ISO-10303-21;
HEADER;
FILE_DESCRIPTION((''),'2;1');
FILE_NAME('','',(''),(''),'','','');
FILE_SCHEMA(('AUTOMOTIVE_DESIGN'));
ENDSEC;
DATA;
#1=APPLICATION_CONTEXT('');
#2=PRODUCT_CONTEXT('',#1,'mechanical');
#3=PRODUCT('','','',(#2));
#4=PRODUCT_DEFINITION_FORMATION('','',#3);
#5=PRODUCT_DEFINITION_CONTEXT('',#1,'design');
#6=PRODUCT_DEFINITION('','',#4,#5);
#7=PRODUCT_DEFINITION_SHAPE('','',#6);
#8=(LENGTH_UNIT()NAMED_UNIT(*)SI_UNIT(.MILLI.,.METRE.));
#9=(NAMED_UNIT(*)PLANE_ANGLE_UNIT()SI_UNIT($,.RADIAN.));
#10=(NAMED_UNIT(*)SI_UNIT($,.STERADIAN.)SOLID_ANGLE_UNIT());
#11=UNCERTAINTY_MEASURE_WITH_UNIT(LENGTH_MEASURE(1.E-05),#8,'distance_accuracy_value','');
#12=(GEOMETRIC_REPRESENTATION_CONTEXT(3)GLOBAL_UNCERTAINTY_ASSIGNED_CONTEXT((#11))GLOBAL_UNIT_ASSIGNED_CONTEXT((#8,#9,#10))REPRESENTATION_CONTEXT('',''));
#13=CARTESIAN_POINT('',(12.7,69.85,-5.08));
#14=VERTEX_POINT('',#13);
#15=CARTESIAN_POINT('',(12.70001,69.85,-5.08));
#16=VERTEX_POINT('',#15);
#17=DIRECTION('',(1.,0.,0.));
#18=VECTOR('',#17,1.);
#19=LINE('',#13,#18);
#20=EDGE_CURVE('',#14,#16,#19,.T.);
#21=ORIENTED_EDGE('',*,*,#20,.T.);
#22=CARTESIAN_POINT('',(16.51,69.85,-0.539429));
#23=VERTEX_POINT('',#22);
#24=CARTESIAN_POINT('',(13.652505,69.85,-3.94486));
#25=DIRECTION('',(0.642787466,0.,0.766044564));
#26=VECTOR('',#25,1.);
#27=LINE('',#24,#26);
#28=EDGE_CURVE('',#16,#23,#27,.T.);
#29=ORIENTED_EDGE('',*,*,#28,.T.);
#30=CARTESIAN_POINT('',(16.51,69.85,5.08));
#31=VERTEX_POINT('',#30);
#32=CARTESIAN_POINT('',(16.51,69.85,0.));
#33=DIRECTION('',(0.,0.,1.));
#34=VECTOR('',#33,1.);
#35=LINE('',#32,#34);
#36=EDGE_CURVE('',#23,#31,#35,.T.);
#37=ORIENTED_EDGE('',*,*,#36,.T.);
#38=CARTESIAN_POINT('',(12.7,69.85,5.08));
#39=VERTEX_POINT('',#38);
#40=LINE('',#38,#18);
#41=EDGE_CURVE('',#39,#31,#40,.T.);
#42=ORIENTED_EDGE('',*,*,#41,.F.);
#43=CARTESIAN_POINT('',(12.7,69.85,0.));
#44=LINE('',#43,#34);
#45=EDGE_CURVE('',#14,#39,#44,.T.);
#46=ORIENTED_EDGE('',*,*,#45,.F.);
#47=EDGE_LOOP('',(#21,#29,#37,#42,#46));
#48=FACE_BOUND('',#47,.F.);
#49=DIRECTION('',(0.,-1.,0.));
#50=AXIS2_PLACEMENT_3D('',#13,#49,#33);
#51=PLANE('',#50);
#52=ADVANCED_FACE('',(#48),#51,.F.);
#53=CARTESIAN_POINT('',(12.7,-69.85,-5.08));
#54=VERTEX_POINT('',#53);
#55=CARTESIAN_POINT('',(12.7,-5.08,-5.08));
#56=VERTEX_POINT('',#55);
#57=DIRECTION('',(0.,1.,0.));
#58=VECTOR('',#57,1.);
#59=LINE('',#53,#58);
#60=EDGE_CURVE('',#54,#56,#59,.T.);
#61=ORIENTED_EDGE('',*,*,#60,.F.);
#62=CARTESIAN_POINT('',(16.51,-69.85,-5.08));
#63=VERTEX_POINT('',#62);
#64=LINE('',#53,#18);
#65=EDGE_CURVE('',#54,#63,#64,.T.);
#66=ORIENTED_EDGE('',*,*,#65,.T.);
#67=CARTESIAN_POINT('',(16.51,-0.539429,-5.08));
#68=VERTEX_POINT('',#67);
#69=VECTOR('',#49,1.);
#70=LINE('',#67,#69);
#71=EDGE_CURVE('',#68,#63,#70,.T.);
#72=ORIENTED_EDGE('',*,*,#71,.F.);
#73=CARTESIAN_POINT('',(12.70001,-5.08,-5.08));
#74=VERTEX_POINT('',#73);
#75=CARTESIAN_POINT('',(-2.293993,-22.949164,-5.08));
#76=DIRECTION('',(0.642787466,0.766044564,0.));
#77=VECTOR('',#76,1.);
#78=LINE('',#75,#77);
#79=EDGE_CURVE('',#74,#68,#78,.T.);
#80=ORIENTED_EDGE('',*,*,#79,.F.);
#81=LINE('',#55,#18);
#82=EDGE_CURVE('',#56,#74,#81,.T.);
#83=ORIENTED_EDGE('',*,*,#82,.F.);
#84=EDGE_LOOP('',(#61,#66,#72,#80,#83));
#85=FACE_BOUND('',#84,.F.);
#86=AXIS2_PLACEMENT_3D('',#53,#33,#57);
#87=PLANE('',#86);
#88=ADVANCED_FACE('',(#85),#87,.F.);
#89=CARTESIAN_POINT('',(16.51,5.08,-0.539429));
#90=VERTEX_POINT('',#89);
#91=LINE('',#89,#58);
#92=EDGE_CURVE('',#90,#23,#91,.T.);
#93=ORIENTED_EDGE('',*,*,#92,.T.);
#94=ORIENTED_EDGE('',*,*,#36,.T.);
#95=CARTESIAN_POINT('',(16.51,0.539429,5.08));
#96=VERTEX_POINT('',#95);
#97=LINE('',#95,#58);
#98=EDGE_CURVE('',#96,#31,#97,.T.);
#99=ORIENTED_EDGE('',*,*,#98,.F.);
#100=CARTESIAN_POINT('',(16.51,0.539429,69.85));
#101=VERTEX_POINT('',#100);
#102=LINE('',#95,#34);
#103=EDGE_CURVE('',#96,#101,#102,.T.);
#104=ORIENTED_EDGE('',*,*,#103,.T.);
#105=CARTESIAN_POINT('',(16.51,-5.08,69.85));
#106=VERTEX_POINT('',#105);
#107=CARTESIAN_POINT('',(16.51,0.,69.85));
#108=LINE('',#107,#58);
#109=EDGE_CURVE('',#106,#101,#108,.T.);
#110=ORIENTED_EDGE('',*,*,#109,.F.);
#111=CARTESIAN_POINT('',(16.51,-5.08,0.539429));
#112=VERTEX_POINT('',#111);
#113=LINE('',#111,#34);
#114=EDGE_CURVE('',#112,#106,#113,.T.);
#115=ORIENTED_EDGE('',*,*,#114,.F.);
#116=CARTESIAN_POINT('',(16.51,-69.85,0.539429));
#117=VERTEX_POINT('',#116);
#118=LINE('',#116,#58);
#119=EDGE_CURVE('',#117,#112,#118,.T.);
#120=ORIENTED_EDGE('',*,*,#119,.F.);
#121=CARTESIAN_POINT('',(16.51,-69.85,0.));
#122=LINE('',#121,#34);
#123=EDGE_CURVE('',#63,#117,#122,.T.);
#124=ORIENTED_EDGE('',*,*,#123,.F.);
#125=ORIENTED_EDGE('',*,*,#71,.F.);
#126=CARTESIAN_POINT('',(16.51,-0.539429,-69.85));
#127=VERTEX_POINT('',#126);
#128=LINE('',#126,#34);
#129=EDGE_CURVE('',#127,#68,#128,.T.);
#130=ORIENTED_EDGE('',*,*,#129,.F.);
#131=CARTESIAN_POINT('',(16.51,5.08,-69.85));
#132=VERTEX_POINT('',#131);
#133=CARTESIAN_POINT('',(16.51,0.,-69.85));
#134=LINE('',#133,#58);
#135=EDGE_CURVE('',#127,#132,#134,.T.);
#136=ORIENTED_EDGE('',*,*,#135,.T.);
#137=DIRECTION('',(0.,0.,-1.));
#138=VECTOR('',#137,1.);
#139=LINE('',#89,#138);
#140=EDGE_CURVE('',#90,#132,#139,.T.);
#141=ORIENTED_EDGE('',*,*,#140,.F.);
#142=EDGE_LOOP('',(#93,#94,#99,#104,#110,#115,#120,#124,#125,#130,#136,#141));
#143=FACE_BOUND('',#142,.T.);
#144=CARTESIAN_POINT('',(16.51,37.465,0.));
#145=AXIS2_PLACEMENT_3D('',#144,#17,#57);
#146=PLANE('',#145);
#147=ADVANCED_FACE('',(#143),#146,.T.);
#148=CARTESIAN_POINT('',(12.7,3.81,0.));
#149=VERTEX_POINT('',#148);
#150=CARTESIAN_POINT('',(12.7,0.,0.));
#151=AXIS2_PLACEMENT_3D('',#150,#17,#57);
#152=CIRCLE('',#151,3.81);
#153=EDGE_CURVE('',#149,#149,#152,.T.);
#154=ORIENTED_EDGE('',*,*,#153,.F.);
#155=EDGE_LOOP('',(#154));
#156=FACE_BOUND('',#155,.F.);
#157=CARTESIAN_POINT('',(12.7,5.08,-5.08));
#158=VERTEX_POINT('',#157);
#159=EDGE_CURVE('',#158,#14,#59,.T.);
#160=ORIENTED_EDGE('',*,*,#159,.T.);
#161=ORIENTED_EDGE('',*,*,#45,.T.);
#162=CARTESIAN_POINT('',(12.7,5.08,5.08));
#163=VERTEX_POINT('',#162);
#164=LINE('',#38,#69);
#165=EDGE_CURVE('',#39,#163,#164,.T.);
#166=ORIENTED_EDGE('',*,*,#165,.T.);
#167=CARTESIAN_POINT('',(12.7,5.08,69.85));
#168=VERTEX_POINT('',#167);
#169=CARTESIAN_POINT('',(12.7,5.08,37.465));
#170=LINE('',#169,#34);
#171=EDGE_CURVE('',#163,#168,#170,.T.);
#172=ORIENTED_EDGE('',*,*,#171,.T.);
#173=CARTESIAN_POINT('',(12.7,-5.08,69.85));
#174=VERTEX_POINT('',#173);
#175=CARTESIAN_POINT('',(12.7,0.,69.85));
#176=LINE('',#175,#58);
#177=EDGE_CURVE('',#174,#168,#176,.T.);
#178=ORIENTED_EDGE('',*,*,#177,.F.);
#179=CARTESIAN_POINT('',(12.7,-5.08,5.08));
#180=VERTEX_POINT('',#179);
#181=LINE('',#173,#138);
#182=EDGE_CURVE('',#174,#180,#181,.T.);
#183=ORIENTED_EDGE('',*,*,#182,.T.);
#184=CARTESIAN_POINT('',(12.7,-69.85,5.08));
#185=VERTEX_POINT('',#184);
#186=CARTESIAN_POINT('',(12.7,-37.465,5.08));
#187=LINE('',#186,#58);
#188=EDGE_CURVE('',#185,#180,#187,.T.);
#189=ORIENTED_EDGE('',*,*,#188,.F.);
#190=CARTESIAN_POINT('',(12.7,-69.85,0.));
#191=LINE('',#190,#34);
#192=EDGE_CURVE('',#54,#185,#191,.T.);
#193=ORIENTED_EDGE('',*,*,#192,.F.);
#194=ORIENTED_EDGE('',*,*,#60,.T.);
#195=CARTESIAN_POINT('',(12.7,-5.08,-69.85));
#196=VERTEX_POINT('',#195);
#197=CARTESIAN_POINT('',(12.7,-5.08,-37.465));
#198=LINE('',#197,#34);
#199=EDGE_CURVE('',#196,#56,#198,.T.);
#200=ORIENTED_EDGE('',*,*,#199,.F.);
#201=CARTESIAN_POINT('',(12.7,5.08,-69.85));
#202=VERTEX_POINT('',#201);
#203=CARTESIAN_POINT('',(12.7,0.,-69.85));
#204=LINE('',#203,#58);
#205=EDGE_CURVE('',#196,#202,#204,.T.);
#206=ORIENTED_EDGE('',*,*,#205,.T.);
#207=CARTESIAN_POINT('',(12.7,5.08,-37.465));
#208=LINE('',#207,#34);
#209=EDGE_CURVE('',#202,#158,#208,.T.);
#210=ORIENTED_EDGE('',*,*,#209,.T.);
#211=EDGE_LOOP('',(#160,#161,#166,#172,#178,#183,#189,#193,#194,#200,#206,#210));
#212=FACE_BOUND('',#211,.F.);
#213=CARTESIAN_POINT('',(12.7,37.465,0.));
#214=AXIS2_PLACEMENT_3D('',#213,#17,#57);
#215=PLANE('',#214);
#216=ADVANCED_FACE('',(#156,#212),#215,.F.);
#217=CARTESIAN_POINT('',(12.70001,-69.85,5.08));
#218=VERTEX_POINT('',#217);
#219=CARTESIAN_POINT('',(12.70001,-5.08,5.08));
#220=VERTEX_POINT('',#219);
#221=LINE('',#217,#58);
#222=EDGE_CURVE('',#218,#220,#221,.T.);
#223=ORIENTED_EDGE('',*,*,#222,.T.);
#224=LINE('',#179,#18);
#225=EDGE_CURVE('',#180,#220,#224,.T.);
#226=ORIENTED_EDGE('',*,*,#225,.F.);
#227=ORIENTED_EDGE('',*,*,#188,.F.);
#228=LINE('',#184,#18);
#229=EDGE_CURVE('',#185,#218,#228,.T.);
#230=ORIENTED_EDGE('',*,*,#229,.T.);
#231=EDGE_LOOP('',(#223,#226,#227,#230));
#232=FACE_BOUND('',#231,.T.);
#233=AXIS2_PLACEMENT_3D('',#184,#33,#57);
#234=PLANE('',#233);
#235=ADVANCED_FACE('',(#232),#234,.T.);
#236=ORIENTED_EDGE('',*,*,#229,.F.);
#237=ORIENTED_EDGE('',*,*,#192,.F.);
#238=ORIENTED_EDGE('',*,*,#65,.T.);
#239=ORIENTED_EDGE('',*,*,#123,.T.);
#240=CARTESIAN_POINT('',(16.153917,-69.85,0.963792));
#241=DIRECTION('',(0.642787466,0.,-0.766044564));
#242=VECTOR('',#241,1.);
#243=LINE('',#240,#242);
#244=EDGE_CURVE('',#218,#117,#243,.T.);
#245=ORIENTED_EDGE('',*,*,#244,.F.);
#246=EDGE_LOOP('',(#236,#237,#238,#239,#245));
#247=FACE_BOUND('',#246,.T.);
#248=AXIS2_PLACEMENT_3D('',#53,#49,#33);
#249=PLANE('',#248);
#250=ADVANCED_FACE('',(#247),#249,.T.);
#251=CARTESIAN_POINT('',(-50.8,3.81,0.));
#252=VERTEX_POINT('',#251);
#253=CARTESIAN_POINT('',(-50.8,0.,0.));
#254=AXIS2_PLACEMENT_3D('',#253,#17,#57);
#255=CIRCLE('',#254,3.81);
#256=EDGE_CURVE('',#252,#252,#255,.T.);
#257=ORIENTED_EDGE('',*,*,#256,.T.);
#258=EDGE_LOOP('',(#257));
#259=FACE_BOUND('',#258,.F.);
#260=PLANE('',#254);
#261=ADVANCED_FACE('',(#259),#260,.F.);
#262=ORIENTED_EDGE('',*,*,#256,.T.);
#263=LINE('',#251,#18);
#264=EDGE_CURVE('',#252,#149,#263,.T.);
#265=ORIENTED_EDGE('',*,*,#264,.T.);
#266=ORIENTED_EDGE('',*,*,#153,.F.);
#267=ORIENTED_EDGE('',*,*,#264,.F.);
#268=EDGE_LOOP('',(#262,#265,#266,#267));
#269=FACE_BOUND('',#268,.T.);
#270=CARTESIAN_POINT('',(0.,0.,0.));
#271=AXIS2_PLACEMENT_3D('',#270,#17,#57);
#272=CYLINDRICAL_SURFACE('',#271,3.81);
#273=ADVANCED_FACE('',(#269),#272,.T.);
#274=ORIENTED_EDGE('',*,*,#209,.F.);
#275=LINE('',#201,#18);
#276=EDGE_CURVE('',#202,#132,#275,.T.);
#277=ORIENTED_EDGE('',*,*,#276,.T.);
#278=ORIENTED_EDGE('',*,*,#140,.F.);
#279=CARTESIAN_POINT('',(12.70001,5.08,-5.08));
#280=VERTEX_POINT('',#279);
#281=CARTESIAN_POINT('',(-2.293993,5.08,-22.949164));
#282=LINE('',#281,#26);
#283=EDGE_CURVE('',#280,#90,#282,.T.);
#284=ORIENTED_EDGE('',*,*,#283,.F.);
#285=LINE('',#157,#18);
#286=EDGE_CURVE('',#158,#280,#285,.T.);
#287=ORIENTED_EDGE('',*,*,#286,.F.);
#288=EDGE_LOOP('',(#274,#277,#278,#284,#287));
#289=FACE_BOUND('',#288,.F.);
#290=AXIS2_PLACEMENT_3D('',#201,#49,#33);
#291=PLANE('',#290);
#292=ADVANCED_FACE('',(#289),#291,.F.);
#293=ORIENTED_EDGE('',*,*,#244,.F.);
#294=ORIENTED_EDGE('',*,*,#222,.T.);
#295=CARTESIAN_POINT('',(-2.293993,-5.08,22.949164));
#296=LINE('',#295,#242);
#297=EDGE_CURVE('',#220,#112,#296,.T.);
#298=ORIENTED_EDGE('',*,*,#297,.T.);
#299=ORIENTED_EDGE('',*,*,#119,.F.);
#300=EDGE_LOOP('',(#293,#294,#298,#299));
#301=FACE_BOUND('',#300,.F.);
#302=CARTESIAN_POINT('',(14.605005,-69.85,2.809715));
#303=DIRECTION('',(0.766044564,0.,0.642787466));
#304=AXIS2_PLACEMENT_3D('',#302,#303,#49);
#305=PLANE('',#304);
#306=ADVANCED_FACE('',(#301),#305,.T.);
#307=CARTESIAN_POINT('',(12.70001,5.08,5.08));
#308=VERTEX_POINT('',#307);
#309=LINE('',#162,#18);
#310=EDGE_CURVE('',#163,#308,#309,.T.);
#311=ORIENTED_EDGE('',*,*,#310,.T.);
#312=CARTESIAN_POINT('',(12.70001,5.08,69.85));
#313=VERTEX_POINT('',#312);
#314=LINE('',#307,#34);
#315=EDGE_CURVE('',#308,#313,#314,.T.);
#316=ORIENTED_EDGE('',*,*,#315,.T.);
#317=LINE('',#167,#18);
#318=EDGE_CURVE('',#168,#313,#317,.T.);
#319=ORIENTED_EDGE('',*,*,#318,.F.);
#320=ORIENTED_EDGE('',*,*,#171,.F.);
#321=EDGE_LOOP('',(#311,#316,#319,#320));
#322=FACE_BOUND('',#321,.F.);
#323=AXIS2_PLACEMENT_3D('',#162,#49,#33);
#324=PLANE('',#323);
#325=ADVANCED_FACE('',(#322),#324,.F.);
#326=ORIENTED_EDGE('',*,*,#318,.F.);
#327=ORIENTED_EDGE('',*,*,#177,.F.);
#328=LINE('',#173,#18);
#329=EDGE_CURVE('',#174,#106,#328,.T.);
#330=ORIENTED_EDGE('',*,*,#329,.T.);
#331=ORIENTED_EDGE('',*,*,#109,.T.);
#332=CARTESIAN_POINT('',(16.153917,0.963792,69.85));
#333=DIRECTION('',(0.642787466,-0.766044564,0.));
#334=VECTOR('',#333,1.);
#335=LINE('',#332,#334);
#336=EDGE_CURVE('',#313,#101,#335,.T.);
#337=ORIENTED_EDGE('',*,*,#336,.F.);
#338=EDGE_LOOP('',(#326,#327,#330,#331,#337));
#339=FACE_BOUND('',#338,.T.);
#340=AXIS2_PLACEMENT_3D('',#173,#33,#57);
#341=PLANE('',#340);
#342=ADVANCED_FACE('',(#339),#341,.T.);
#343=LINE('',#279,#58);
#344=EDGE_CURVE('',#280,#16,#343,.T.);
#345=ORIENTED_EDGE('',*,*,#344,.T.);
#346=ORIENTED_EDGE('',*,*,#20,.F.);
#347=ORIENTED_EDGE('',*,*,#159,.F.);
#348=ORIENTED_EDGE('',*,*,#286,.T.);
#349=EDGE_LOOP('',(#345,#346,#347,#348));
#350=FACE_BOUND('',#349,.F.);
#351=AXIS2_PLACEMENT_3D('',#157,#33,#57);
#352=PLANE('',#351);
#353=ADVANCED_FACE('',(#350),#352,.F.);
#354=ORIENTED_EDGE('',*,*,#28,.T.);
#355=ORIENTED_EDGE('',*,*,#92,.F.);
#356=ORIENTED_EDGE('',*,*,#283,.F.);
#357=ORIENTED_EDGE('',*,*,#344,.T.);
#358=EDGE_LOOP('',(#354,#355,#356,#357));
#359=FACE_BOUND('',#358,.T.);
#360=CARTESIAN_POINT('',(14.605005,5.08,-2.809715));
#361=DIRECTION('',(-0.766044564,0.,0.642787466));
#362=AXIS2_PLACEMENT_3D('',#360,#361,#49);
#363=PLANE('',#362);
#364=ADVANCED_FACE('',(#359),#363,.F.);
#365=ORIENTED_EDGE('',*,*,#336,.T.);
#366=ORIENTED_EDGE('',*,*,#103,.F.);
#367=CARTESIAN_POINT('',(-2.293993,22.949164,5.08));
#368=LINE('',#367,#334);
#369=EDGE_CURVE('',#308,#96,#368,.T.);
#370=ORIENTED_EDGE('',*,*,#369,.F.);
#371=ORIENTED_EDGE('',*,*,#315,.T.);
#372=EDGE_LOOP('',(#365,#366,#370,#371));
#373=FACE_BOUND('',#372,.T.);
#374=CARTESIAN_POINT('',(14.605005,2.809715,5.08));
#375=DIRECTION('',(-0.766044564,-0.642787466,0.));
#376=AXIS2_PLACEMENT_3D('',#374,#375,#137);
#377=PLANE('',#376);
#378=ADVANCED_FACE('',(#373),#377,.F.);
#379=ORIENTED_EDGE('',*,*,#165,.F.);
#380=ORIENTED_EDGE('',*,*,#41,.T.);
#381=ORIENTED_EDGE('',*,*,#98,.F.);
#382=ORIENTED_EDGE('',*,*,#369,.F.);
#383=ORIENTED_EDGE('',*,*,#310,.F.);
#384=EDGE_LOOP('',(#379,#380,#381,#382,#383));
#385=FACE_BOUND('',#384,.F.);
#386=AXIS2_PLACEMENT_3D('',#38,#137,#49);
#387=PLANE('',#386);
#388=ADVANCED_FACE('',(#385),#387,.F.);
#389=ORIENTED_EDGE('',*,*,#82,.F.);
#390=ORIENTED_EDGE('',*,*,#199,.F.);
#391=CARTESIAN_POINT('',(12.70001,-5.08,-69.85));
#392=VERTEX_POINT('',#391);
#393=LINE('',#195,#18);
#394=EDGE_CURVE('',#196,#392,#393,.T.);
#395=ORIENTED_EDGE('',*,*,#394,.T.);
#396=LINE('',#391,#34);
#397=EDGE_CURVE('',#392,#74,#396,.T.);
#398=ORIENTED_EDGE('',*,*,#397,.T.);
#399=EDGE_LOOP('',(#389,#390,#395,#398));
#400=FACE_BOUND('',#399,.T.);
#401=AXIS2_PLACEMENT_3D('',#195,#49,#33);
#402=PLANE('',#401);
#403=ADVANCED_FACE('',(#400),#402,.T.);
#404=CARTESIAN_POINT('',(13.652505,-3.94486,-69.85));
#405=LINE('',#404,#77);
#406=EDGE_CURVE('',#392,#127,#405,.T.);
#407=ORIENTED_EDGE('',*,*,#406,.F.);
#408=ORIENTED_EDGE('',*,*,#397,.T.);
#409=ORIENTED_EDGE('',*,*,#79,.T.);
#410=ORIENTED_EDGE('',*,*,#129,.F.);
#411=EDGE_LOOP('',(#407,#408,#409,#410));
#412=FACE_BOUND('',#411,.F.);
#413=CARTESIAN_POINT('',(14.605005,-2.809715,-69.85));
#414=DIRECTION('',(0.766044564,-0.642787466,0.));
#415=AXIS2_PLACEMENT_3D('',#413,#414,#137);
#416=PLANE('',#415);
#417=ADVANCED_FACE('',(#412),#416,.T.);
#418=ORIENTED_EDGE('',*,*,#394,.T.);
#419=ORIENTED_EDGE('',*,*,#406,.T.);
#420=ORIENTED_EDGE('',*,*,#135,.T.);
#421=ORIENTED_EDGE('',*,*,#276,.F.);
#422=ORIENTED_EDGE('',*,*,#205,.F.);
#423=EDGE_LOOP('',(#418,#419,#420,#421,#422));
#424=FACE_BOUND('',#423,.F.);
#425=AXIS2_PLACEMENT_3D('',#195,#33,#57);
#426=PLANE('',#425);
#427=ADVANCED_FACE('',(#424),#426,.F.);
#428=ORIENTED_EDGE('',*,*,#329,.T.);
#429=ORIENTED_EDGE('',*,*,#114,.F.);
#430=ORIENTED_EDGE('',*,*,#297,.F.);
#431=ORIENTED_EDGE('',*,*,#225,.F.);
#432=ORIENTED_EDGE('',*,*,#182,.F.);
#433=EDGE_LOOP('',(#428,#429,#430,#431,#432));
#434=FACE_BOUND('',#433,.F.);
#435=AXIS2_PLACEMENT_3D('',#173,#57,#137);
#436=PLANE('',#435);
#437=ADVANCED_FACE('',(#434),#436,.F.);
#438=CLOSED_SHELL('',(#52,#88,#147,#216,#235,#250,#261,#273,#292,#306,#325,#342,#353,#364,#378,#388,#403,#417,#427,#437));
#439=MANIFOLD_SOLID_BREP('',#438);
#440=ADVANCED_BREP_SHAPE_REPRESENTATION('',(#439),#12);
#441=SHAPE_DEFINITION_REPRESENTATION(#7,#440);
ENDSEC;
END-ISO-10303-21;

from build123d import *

# Parameters (mm, degrees)
F0_R          = 3.81
F1_DEPTH      = 12.7
F1_DEPTH_BACK = 50.8
F2_W          = 64.77
F2_H          = 10.16
F2_W_2        = 10.16
F2_H_2        = 64.77
F3_DEPTH      = 3.81
F4_SIZE2      = 4.540571
F4_SIZE       = 3.80999
F4_2_SIZE2    = 4.540571
F4_2_SIZE     = 3.80999
F4_3_SIZE2    = 4.540571
F4_3_SIZE     = 3.80999
F4_4_SIZE2    = 4.540571
F4_4_SIZE     = 3.80999


# Not quite as in the source:
# - a fillet or chamfer is up to 0.001 mm smaller than in the source, because OpenCascade refuses the exact size


with BuildPart() as f1:
    # F0 (on Right) → F1 (new body, two sides)
    with BuildSketch(Plane.YZ) as f1_sk:
        Circle(F0_R)
    extrude(amount=F1_DEPTH)
    extrude(f1_sk.sketch, amount=-F1_DEPTH_BACK)

    # F2 (on face) → F3 (join)
    with BuildSketch(Plane.YZ.offset(12.7)):
        with Locations((37.465, 0)):
            Rectangle(F2_W, F2_H)
        Rectangle(F2_W_2, F2_H)
        with Locations((0, 37.465)):
            Rectangle(F2_W_2, F2_H_2)
        with Locations((-37.465, 0)):
            Rectangle(F2_W, F2_H)
        with Locations((0, -37.465)):
            Rectangle(F2_W_2, F2_H_2)
    extrude(amount=F3_DEPTH)

    # F4 (size 3.81 and 4.5405811878 in the source; OpenCascade refuses exactly that, so slightly less here)
    f4_edges = [f1.edges().sort_by_distance(p)[0] for p in [
        (16.51, 5.08, 37.465),
    ]]
    f4_side = f1.faces().sort_by_distance((14.605, 5.08, 37.465))[0]
    chamfer(f4_edges, length=F4_SIZE, length2=F4_SIZE2, reference=f4_side)

    # F4#2 (size 3.81 and 4.5405811878 in the source; OpenCascade refuses exactly that, so slightly less here)
    f4_2_edges = [f1.edges().sort_by_distance(p)[0] for p in [
        (16.51, 37.465, -5.08),
    ]]
    f4_2_side = f1.faces().sort_by_distance((14.605, 37.465, -5.08))[0]
    chamfer(f4_2_edges, length=F4_2_SIZE, length2=F4_2_SIZE2, reference=f4_2_side)

    # F4#3 (size 3.81 and 4.5405811878 in the source; OpenCascade refuses exactly that, so slightly less here)
    f4_3_edges = [f1.edges().sort_by_distance(p)[0] for p in [
        (16.51, -5.08, -37.465),
    ]]
    f4_3_side = f1.faces().sort_by_distance((14.605, -5.08, -37.465))[0]
    chamfer(f4_3_edges, length=F4_3_SIZE, length2=F4_3_SIZE2, reference=f4_3_side)

    # F4#4 (size 3.81 and 4.5405811878 in the source; OpenCascade refuses exactly that, so slightly less here)
    f4_4_edges = [f1.edges().sort_by_distance(p)[0] for p in [
        (16.51, -37.465, 5.08),
    ]]
    f4_4_side = f1.faces().sort_by_distance((14.605, -37.465, 5.08))[0]
    chamfer(f4_4_edges, length=F4_4_SIZE, length2=F4_4_SIZE2, reference=f4_4_side)


solid = f1.part
